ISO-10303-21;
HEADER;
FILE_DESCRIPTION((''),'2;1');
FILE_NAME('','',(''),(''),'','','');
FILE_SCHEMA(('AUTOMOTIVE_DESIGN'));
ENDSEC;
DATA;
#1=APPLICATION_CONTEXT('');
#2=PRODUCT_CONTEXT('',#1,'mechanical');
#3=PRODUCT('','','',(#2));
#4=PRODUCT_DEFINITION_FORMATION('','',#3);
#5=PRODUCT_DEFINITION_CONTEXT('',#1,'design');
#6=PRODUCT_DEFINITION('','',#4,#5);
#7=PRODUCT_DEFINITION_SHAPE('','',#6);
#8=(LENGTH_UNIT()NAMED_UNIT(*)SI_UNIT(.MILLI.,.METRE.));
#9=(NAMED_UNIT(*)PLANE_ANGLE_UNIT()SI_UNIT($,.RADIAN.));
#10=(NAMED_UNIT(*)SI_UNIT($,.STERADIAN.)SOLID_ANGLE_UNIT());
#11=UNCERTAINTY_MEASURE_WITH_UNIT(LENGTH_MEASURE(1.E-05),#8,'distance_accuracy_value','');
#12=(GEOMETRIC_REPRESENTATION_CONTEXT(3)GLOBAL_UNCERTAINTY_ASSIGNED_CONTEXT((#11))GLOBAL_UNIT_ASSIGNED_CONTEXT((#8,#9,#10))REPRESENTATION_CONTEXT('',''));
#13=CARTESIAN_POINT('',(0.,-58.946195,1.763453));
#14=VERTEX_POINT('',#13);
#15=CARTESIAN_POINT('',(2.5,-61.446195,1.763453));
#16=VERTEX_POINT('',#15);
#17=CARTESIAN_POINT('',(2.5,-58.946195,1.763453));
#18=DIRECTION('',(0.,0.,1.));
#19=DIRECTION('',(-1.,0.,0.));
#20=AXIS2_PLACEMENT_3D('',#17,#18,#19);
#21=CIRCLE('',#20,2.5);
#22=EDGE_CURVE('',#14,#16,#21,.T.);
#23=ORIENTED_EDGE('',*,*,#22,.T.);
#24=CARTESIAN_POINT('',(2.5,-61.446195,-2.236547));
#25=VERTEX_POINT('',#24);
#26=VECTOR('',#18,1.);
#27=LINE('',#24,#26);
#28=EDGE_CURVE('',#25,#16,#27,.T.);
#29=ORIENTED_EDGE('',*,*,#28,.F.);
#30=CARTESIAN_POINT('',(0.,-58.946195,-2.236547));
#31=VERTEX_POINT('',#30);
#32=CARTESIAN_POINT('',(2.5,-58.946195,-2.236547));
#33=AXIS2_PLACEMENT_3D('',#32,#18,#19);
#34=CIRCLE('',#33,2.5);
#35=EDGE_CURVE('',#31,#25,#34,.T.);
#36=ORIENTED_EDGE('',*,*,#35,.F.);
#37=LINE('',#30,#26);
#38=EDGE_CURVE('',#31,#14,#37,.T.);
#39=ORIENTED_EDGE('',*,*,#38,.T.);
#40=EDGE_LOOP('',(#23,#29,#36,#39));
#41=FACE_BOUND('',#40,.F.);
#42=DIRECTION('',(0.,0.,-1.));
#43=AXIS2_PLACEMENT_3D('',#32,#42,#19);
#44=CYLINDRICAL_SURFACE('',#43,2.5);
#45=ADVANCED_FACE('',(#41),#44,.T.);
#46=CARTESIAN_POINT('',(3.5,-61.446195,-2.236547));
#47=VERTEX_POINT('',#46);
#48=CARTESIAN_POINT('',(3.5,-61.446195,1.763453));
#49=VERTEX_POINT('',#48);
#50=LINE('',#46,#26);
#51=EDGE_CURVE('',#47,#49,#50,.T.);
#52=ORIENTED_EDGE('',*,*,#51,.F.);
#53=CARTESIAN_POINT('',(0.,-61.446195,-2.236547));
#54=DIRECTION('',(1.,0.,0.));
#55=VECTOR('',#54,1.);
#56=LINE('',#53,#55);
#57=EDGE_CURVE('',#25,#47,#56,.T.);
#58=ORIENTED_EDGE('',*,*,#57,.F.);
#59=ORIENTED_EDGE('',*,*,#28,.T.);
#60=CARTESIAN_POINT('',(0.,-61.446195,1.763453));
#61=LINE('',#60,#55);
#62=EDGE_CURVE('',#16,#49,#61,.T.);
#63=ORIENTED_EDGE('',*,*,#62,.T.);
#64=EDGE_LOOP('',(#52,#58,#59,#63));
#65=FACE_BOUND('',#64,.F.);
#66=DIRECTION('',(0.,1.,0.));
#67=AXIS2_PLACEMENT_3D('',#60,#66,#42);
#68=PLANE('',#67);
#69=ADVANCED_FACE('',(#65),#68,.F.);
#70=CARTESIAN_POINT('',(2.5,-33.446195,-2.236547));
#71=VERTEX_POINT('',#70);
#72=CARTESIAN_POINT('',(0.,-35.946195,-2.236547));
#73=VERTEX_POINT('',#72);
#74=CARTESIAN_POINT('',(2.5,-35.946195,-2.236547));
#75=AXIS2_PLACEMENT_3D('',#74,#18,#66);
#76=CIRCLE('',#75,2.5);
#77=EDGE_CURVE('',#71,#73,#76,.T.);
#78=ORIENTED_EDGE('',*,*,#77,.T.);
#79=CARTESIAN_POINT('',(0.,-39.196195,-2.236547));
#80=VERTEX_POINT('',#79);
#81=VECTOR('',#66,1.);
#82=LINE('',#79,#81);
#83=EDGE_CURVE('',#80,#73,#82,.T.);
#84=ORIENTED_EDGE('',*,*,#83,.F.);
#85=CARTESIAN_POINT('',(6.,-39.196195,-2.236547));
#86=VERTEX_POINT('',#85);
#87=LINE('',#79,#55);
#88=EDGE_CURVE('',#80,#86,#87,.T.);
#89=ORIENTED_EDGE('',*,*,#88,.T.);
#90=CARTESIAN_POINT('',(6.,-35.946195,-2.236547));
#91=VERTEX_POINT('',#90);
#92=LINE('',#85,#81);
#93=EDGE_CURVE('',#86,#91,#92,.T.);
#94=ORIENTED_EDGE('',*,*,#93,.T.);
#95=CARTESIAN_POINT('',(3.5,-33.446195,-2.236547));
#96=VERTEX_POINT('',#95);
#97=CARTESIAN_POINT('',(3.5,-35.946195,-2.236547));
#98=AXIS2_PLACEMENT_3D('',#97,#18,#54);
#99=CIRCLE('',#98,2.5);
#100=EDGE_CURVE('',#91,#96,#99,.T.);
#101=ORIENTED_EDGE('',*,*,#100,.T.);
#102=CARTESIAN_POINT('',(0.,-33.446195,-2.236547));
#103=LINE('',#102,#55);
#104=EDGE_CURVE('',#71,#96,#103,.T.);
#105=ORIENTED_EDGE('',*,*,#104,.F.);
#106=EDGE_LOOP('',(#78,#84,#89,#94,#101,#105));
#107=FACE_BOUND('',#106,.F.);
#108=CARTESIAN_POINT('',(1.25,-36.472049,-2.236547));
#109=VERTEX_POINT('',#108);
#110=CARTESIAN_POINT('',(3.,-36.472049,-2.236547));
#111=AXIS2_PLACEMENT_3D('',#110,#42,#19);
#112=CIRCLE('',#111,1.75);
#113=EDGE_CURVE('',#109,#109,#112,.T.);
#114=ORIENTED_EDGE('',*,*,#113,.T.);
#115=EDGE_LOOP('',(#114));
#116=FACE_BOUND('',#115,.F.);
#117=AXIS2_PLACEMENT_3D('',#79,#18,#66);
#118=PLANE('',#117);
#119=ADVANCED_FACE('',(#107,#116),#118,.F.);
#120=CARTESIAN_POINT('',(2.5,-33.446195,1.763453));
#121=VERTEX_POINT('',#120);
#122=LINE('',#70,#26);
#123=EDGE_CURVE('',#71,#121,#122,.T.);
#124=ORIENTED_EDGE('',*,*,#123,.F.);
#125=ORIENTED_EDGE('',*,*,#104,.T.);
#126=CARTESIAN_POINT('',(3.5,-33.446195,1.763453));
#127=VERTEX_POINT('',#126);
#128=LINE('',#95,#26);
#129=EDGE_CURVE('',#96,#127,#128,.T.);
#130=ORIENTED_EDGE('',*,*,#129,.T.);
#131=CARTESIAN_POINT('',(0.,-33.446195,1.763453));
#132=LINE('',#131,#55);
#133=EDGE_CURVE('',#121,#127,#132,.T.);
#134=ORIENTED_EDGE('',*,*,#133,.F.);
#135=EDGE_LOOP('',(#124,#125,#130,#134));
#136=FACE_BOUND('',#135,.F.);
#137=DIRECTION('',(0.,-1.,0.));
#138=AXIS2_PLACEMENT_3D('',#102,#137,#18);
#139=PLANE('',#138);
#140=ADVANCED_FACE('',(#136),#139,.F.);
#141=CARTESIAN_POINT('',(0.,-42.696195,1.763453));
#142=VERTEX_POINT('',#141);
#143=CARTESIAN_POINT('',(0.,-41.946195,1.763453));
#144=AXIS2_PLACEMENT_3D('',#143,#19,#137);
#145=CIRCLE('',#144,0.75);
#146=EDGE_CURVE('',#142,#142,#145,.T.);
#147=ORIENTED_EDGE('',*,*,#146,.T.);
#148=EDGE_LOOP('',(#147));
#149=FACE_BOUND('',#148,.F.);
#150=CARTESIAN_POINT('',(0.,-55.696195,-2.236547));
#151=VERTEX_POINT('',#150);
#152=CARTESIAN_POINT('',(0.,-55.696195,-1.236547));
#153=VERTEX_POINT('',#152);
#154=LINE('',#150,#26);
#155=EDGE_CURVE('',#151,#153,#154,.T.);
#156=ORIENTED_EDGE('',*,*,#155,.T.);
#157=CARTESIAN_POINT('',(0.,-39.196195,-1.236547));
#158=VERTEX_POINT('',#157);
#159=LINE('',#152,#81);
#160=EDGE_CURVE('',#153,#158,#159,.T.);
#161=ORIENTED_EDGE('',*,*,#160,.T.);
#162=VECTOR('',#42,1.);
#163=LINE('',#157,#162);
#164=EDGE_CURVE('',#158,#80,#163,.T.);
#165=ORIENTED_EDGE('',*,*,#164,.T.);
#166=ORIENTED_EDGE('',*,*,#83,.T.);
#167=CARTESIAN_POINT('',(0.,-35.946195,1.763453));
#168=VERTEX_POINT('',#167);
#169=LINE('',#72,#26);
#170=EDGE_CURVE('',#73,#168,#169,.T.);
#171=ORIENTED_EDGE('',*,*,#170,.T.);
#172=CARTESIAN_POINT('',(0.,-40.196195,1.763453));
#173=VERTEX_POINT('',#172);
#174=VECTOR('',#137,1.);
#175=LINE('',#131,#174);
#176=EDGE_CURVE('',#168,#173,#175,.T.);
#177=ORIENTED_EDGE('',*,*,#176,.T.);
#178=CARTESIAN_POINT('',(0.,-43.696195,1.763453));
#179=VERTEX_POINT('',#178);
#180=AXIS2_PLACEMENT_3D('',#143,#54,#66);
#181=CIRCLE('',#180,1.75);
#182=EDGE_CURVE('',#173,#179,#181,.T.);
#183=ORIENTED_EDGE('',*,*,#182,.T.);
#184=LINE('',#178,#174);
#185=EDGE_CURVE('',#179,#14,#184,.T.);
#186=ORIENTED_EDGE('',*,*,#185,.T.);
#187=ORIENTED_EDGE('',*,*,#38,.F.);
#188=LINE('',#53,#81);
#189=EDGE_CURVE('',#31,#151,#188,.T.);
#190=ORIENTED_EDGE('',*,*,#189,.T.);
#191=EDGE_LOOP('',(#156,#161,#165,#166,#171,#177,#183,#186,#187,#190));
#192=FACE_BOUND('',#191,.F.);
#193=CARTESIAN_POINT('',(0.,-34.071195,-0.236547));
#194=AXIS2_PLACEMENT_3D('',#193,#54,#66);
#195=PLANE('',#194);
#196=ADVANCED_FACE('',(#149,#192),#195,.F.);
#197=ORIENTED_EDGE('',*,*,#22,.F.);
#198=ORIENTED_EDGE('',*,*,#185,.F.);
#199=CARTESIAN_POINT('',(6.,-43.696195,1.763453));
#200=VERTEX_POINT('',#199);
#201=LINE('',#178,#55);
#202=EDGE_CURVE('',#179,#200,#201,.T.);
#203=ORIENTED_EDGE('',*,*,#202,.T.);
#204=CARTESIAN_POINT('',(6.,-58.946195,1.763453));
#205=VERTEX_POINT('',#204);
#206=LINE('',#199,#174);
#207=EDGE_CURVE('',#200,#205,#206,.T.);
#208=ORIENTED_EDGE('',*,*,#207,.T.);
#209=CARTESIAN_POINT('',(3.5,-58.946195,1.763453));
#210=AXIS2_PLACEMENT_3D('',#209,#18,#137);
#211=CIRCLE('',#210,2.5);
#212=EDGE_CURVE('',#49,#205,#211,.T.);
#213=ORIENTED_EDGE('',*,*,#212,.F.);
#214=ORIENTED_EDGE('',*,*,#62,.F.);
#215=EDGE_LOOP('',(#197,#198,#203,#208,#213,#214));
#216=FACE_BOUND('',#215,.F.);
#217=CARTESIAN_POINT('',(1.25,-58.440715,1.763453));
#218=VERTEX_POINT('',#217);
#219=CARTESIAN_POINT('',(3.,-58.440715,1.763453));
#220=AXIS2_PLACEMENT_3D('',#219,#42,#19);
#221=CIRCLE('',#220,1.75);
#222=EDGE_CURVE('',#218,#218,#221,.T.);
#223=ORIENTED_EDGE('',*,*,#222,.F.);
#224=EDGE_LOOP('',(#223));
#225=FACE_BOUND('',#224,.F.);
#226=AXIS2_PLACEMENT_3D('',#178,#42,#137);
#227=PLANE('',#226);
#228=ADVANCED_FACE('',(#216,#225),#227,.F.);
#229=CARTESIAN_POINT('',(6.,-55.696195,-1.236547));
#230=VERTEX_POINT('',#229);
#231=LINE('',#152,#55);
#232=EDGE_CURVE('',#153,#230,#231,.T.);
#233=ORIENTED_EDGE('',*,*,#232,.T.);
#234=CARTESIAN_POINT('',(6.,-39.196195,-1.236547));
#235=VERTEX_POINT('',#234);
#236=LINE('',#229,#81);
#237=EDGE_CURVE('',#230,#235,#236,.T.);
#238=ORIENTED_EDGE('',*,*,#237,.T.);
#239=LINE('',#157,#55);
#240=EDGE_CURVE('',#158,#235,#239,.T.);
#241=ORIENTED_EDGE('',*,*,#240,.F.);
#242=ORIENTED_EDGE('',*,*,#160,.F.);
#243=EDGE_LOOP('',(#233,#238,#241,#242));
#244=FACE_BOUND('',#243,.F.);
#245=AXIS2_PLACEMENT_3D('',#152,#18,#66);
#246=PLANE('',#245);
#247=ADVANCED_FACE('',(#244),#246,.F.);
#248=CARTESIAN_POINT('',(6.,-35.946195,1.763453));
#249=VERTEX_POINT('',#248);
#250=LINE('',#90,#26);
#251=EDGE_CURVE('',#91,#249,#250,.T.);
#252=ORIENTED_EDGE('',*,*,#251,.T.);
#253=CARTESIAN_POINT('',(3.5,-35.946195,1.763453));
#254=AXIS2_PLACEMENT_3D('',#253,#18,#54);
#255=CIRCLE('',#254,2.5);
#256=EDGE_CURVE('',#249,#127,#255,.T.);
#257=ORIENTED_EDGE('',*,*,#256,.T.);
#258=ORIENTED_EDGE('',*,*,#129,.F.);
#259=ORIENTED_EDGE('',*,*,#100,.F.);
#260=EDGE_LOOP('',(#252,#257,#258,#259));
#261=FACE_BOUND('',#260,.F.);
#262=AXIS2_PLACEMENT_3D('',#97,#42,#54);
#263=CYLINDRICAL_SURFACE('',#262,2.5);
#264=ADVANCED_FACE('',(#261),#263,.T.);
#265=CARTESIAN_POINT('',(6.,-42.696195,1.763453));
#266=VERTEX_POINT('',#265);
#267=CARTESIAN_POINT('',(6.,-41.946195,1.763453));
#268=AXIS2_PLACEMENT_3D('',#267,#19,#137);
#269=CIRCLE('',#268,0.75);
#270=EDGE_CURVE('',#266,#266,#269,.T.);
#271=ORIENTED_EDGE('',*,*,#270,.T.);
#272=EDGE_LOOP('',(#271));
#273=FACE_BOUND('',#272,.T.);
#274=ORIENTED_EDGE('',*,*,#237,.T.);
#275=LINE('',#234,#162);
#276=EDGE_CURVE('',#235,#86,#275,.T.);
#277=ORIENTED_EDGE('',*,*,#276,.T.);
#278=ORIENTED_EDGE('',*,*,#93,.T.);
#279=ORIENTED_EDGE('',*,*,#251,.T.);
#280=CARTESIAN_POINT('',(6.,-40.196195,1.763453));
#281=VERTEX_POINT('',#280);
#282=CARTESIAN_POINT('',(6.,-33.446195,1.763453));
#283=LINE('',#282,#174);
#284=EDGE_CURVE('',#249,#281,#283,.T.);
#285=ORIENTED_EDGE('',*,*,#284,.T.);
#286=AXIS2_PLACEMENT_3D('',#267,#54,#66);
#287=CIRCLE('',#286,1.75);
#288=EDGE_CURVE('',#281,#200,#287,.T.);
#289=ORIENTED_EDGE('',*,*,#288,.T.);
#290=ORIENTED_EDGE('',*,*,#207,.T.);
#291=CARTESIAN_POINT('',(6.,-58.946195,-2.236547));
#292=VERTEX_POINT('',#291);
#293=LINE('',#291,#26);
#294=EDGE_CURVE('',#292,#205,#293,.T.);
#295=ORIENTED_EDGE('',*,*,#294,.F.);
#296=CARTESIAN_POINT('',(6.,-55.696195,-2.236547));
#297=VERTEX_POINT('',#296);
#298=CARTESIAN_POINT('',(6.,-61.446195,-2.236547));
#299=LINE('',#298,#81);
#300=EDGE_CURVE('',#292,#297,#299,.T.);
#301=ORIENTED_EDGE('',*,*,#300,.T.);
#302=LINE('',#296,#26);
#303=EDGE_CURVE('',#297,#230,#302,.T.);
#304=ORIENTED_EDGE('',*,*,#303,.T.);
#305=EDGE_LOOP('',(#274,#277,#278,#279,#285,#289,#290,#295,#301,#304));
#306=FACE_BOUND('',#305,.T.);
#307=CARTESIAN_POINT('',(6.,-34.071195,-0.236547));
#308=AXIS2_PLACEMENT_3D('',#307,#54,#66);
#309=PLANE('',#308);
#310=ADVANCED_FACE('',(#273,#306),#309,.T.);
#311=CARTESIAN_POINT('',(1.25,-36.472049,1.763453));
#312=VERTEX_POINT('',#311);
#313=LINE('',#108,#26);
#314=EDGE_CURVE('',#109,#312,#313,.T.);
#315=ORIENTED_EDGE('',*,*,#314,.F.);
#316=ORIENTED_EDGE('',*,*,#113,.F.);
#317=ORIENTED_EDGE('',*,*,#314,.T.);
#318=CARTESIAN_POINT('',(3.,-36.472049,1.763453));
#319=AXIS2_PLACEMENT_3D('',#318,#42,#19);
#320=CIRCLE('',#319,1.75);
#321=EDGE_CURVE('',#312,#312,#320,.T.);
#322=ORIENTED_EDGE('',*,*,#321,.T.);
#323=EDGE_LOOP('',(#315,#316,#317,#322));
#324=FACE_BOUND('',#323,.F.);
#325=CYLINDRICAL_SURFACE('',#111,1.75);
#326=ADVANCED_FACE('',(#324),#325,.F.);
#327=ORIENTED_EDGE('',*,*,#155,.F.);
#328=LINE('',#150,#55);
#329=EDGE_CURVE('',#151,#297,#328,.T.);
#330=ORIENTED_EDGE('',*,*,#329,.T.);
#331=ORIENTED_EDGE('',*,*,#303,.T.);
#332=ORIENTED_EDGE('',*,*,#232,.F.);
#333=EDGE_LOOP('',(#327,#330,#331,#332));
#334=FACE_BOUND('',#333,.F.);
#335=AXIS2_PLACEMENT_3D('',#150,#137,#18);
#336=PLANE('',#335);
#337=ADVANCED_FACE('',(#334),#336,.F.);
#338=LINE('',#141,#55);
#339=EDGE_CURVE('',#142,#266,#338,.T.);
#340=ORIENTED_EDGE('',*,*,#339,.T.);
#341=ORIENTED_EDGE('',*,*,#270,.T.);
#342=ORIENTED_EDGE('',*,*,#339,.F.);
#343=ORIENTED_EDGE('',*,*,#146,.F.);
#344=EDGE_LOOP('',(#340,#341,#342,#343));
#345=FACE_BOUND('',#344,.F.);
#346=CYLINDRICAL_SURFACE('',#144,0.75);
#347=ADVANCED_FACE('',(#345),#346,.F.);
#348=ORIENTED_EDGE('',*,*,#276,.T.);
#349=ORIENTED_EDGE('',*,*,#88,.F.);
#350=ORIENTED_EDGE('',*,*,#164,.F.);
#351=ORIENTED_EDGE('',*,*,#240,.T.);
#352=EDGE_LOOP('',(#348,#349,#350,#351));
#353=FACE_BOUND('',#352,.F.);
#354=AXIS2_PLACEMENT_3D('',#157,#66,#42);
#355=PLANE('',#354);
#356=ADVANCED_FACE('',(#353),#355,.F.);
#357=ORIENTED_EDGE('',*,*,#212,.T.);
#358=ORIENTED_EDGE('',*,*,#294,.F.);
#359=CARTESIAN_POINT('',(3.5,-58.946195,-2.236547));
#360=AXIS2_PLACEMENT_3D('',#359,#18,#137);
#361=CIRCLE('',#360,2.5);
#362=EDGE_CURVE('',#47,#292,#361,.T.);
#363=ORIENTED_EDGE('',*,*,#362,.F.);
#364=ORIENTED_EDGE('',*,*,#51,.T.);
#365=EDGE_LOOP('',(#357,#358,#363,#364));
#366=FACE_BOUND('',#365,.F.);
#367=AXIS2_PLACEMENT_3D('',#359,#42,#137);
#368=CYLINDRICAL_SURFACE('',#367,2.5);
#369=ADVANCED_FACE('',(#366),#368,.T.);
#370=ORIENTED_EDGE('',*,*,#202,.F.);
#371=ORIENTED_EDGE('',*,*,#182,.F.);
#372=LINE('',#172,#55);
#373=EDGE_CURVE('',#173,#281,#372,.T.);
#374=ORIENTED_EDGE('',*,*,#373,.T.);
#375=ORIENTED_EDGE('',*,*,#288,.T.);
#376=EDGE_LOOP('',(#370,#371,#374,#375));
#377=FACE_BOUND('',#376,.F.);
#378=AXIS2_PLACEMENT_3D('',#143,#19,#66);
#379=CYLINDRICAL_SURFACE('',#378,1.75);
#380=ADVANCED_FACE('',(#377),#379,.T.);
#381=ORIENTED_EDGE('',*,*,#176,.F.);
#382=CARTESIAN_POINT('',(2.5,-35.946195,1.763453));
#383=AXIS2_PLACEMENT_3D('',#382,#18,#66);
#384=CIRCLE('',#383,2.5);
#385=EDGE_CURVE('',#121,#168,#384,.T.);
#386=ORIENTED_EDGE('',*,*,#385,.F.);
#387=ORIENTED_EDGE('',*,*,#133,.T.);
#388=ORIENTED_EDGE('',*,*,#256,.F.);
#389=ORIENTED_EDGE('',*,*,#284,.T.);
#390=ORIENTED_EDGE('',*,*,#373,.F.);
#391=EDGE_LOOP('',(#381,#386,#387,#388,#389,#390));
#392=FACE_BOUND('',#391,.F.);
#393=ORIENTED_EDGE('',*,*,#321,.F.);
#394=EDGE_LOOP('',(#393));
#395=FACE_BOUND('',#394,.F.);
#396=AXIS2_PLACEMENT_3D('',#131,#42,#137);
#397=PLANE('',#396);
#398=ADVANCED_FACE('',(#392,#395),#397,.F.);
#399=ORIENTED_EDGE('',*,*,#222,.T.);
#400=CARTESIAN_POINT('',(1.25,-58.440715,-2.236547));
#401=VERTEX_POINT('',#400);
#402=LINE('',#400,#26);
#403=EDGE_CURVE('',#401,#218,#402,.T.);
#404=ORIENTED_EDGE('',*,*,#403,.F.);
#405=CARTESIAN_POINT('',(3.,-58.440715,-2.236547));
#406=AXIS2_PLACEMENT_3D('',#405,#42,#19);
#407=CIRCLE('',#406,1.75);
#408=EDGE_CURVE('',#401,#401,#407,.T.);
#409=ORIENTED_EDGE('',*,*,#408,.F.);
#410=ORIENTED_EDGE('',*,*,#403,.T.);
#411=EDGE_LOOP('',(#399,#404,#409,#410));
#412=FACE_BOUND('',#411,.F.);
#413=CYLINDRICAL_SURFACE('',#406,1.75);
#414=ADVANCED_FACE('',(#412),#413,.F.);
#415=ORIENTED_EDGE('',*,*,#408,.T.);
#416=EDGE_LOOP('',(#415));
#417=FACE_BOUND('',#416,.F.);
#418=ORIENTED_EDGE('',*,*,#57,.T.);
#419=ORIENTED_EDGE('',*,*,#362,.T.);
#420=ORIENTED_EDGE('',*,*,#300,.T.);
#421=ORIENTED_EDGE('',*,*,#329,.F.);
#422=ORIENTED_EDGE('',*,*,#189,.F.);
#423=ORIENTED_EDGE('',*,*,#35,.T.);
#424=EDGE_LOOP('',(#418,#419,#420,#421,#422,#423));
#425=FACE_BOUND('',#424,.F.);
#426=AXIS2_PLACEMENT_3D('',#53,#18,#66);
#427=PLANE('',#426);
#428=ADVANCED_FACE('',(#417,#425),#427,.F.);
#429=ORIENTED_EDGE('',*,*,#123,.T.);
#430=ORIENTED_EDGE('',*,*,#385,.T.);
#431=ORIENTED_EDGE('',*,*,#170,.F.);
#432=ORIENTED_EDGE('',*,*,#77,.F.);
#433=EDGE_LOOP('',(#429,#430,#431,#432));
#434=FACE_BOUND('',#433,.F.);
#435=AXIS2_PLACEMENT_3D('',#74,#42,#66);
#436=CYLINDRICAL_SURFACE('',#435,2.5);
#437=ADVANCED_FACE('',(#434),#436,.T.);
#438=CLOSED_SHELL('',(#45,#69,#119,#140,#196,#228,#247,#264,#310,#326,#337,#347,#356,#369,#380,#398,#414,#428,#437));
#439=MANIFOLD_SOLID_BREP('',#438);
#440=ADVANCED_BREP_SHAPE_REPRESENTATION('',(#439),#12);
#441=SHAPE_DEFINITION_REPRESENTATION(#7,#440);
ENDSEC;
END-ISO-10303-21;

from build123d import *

# Parameters (mm, degrees)
F0_W     = 1.25
F0_H     = 4
F0_W_2   = 1.75
F1_DEPTH = 6
F4_DEPTH = 4
F5_DEPTH = 4
F6_DEPTH = 4


# Not quite as in the source:
# - a feature names something its author has since deleted; it is built from what else it names


with BuildPart() as f1:
    # F0 (on Right) → F1 (new body)
    with BuildSketch(Plane.YZ):
        with Locations((-34.0711950026, -0.2365471814)):
            Rectangle(F0_W, F0_H)
        with Locations((-35.5711950026, -0.2365471814)):
            Rectangle(F0_W_2, F0_H)
        with BuildLine():
            Line((-38.1961950026, -2.2365471814), (-36.4461950026, -2.2365471814))
            Line((-36.4461950026, -2.2365471814), (-36.4461950026, 1.7634528186))
            Line((-36.4461950026, 1.7634528186), (-38.1961950026, 1.7634528186))
            Line((-38.1961950026, 1.7634528186), (-40.1961950026, 1.7634528186))
            ThreePointArc((-40.1961950026, 1.7634528186), (-41.9461950026, 0.0134528186), (-43.6961950026, 1.7634528186))
            Line((-43.6961950026, 1.7634528186), (-56.6961950026, 1.7634528186))
            Line((-56.6961950026, 1.7634528186), (-56.6961950026, -1.4865471814))
            Line((-56.6961950026, -1.4865471814), (-56.6961950026, -2.2365471814))
            Line((-56.6961950026, -2.2365471814), (-55.6961950026, -2.2365471814))
            Line((-55.6961950026, -2.2365471814), (-55.6961950026, -1.2365471814))
            Line((-55.6961950026, -1.2365471814), (-39.1961950026, -1.2365471814))
            Line((-39.1961950026, -1.2365471814), (-39.1961950026, -2.2365471814))
            Line((-39.1961950026, -2.2365471814), (-38.1961950026, -2.2365471814))
        make_face()
        with BuildLine():
            ThreePointArc((-43.6961950026, 1.7634528186), (-41.9461950026, 0.0134528186), (-40.1961950026, 1.7634528186))
            Line((-40.1961950026, 1.7634528186), (-41.1961950026, 1.7634528186))
            ThreePointArc((-41.1961950026, 1.7634528186), (-41.9461950026, 1.0134528186), (-42.6961950026, 1.7634528186))
            Line((-42.6961950026, 1.7634528186), (-43.6961950026, 1.7634528186))
        make_face()
        with BuildLine():
            Line((-41.1961950026, 1.7634528186), (-40.1961950026, 1.7634528186))
            ThreePointArc((-40.1961950026, 1.7634528186), (-41.9461950026, 3.5134528186), (-43.6961950026, 1.7634528186))
            Line((-43.6961950026, 1.7634528186), (-42.6961950026, 1.7634528186))
            ThreePointArc((-42.6961950026, 1.7634528186), (-41.9461950026, 2.5134528186), (-41.1961950026, 1.7634528186))
        make_face()
        Polygon((-56.6961950026, -1.4865471814), (-56.6961950026, 1.7634528186), (-58.4461950026, 1.7634528186), (-58.4461950026, -2.2365471814), (-56.6961950026, -2.2365471814), align=None)
        with Locations((-59.3211950026, -0.2365471814)):
            Rectangle(F0_W_2, F0_H)
        Polygon((-60.1961950026, -2.2365471814), (-60.1961950026, 1.7634528186), (-61.4461950026, 1.7634528186), (-61.4461950026, -0.2365471814), (-61.4461950026, -2.2365471814), align=None)
    extrude(amount=F1_DEPTH)

    # F2 (on face) → F4 (cut)
    with BuildSketch(Plane(origin=(0, 0, -2.2365471814), x_dir=(1, 0, 0), z_dir=(0, 0, -1))):
        with BuildLine():
            Line((0, 61.4461950026), (0, 58.9461950026))
            ThreePointArc((0, 58.9461950026), (0.732233047, 60.7139619556), (2.5, 61.4461950026))
            Line((2.5, 61.4461950026), (0, 61.4461950026))
        make_face()
        with BuildLine():
            ThreePointArc((3.5, 61.4461950026), (5.267766953, 60.7139619556), (6, 58.9461950026))
            Line((6, 58.9461950026), (6, 61.4461950026))
            Line((6, 61.4461950026), (3.5, 61.4461950026))
        make_face()
    extrude(amount=-F4_DEPTH, mode=Mode.SUBTRACT)

    # F2 (on face) → F5 (cut)
    with BuildSketch(Plane(origin=(0, 0, -2.2365471814), x_dir=(1, 0, 0), z_dir=(0, 0, -1))):
        with BuildLine():
            Line((1.25, 58.4407150745), (4.75, 58.4407150745))
            ThreePointArc((4.75, 58.4407150745), (3, 60.1907150745), (1.25, 58.4407150745))
        make_face()
        with BuildLine():
            ThreePointArc((1.25, 58.4407150745), (3, 56.6907150745), (4.75, 58.4407150745))
            Line((4.75, 58.4407150745), (1.25, 58.4407150745))
        make_face()
    extrude(amount=-F5_DEPTH, mode=Mode.SUBTRACT)

    # F3 (on face) → F6 (cut)
    with BuildSketch(Plane(origin=(0, 0, -2.2365471814), x_dir=(1, 0, 0), z_dir=(0, 0, -1))):
        with BuildLine():
            Line((1.25, 36.4720486104), (4.75, 36.4720486104))
            ThreePointArc((4.75, 36.4720486104), (3, 38.2220486104), (1.25, 36.4720486104))
        make_face()
        with BuildLine():
            Line((6, 33.4461950026), (6, 35.9461950026))
            ThreePointArc((6, 35.9461950026), (5.267766953, 34.1784280497), (3.5, 33.4461950026))
            Line((3.5, 33.4461950026), (6, 33.4461950026))
        make_face()
        with BuildLine():
            ThreePointArc((2.5, 33.4461950026), (0.732233047, 34.1784280497), (0, 35.9461950026))
            Line((0, 35.9461950026), (0, 33.4461950026))
            Line((0, 33.4461950026), (2.5, 33.4461950026))
        make_face()
        with BuildLine():
            ThreePointArc((1.25, 36.4720486104), (3, 34.7220486104), (4.75, 36.4720486104))
            Line((4.75, 36.4720486104), (1.25, 36.4720486104))
        make_face()
    extrude(amount=-F6_DEPTH, mode=Mode.SUBTRACT)


solid = f1.part
